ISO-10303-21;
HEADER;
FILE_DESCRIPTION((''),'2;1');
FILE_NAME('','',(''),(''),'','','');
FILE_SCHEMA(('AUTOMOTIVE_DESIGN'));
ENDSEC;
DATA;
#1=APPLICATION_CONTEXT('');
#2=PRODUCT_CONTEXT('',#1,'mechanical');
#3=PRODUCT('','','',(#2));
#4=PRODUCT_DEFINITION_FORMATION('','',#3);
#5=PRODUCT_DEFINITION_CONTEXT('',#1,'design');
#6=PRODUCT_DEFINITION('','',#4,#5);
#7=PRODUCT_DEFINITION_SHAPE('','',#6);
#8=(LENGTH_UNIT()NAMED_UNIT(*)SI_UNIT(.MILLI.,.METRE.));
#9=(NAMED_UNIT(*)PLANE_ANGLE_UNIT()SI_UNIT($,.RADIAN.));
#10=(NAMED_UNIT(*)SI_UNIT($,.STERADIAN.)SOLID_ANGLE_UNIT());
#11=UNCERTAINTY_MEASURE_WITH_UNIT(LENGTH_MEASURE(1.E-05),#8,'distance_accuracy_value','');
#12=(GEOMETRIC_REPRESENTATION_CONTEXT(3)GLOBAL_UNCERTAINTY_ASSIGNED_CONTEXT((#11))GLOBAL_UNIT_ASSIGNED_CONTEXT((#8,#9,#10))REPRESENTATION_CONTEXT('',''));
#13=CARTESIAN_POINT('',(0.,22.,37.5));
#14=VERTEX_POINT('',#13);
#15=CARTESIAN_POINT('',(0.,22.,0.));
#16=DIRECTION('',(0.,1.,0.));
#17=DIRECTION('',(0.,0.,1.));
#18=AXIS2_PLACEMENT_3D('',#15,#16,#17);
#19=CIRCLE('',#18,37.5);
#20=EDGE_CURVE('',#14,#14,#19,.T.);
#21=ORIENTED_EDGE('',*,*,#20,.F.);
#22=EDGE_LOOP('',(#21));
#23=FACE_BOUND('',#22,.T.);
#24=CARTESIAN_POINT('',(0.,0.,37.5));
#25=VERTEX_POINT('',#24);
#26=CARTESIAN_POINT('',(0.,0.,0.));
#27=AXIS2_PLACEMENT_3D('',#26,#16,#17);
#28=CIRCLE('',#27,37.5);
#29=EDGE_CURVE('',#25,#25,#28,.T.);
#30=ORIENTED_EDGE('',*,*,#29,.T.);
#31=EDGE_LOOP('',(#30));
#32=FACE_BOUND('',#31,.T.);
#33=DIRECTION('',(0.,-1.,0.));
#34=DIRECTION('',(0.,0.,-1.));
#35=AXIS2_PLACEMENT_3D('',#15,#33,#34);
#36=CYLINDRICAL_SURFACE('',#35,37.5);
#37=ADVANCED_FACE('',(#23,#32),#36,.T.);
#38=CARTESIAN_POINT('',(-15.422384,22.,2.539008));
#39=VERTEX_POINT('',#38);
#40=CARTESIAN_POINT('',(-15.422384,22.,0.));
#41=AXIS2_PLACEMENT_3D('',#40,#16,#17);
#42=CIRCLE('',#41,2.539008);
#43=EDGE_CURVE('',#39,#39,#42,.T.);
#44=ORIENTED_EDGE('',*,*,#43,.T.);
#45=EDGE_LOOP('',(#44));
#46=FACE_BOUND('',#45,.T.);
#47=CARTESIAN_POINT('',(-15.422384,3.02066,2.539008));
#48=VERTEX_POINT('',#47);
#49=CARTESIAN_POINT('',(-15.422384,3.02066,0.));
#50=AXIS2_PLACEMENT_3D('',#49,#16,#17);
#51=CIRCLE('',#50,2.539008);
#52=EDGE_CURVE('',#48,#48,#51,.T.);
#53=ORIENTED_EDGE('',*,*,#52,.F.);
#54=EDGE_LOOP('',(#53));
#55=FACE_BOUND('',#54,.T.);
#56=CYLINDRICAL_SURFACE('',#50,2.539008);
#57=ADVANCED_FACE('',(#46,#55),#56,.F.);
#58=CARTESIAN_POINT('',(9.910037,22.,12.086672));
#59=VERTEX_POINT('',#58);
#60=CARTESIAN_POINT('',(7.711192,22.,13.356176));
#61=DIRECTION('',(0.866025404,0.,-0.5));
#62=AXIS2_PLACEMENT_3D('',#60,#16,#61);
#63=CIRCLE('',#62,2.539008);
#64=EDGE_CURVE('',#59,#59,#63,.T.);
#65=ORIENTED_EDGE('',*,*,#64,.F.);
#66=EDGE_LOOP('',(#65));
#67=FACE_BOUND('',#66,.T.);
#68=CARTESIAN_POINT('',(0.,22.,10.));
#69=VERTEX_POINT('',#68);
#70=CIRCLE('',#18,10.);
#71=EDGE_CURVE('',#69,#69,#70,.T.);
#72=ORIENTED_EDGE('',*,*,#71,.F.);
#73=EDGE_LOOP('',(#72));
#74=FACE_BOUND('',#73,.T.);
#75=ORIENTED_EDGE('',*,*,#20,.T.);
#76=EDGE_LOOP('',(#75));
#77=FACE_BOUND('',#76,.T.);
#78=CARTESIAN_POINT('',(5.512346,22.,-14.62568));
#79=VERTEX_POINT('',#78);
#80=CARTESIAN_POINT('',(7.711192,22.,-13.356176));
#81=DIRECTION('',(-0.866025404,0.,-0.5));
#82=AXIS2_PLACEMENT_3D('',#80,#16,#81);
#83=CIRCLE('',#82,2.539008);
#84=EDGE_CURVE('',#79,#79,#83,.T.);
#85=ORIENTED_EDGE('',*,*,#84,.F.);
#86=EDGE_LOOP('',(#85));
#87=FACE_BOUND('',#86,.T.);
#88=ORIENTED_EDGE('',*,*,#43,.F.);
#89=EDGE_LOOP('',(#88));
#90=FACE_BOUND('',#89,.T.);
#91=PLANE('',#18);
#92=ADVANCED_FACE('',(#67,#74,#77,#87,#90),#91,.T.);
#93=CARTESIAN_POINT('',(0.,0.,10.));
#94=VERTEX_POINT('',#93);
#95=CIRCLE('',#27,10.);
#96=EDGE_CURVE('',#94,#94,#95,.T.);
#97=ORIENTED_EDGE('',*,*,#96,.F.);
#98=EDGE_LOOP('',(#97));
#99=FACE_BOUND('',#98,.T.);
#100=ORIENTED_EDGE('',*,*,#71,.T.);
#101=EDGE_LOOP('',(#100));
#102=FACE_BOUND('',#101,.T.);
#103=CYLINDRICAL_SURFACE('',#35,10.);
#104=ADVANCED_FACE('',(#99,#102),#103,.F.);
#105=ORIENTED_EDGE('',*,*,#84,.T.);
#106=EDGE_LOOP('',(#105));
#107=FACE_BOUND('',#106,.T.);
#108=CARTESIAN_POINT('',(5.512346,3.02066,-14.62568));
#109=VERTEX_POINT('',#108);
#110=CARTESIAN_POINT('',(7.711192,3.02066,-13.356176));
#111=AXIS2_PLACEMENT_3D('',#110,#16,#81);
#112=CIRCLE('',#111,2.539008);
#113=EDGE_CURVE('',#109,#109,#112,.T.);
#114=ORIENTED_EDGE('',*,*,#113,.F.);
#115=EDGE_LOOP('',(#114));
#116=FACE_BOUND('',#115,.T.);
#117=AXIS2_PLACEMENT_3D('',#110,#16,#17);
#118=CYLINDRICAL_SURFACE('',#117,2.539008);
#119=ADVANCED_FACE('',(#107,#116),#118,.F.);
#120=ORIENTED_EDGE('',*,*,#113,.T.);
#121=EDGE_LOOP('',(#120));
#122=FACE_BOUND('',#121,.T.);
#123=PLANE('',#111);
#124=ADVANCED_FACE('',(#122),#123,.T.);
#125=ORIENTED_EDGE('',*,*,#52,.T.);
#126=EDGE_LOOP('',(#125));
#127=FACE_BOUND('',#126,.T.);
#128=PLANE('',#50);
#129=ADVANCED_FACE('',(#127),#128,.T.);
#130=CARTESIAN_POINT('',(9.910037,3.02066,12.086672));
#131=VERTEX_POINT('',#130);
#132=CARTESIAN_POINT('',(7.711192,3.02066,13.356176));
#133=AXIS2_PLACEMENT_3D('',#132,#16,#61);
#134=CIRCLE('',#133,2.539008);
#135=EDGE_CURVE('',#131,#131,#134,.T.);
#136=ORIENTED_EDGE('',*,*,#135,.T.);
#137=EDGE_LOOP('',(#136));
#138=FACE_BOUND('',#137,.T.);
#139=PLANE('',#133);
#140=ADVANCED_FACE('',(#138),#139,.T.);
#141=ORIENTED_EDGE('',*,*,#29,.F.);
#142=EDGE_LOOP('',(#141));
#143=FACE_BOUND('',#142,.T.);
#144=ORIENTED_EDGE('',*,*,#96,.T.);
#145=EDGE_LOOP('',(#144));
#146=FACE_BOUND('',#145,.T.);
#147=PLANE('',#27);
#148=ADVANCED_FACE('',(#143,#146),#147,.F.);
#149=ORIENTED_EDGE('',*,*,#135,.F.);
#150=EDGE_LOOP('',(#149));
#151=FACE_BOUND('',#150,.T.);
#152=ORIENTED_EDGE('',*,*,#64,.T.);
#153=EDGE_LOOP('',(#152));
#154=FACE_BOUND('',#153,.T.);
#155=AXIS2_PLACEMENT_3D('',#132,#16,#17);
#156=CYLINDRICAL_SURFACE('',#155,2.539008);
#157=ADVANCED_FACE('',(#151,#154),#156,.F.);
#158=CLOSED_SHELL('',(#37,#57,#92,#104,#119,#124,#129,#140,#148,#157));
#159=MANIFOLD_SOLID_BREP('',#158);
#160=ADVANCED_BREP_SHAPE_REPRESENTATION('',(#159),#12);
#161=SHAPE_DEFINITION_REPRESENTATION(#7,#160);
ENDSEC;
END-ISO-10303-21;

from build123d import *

# Parameters (mm, degrees)
SKETCH1_R           = 37.5
BOSS_EXTRUDE1_DEPTH = 22
SKETCH2_R           = 10
CUT_EXTRUDE1_DEPTH  = 58.415154794
SKETCH3_R           = 2.53900813
CUT_EXTRUDE2_DEPTH  = 18.97933991
CIRPATTERN1_COUNT   = 3


with BuildPart() as part:
    # Sketch1 → Boss-Extrude1 (new body)
    with BuildSketch(Plane(origin=(0, 0, 0), x_dir=(1, 0, 0), z_dir=(0, 1, 0))):
        Circle(SKETCH1_R)
    extrude(amount=BOSS_EXTRUDE1_DEPTH)

    # Sketch2 → Cut-Extrude1 (cut, through all)
    with BuildSketch(Plane(origin=(0, 0, 0), x_dir=(1, 0, 0), z_dir=(0, 1, 0))):
        Circle(SKETCH2_R)
    extrude(amount=CUT_EXTRUDE1_DEPTH, mode=Mode.SUBTRACT)

    # Sketch3 → Cut-Extrude2 (cut)
    with BuildSketch(Plane(origin=(0, 22, 0), x_dir=(1, 0, 0), z_dir=(0, 1, 0))):
        with Locations((-15.422383885, 0)):
            Circle(SKETCH3_R)
    cut_extrude2 = extrude(amount=-CUT_EXTRUDE2_DEPTH, mode=Mode.SUBTRACT)

    # CirPattern1: Cut-Extrude2 ×3 about axis
    cirpattern1_axis = Axis((0, 0, 0), (0, 1, 0))
    for i in range(1, CIRPATTERN1_COUNT):
        add(cut_extrude2.rotate(cirpattern1_axis, i * 360 / CIRPATTERN1_COUNT), mode=Mode.SUBTRACT)


solid = part.part
